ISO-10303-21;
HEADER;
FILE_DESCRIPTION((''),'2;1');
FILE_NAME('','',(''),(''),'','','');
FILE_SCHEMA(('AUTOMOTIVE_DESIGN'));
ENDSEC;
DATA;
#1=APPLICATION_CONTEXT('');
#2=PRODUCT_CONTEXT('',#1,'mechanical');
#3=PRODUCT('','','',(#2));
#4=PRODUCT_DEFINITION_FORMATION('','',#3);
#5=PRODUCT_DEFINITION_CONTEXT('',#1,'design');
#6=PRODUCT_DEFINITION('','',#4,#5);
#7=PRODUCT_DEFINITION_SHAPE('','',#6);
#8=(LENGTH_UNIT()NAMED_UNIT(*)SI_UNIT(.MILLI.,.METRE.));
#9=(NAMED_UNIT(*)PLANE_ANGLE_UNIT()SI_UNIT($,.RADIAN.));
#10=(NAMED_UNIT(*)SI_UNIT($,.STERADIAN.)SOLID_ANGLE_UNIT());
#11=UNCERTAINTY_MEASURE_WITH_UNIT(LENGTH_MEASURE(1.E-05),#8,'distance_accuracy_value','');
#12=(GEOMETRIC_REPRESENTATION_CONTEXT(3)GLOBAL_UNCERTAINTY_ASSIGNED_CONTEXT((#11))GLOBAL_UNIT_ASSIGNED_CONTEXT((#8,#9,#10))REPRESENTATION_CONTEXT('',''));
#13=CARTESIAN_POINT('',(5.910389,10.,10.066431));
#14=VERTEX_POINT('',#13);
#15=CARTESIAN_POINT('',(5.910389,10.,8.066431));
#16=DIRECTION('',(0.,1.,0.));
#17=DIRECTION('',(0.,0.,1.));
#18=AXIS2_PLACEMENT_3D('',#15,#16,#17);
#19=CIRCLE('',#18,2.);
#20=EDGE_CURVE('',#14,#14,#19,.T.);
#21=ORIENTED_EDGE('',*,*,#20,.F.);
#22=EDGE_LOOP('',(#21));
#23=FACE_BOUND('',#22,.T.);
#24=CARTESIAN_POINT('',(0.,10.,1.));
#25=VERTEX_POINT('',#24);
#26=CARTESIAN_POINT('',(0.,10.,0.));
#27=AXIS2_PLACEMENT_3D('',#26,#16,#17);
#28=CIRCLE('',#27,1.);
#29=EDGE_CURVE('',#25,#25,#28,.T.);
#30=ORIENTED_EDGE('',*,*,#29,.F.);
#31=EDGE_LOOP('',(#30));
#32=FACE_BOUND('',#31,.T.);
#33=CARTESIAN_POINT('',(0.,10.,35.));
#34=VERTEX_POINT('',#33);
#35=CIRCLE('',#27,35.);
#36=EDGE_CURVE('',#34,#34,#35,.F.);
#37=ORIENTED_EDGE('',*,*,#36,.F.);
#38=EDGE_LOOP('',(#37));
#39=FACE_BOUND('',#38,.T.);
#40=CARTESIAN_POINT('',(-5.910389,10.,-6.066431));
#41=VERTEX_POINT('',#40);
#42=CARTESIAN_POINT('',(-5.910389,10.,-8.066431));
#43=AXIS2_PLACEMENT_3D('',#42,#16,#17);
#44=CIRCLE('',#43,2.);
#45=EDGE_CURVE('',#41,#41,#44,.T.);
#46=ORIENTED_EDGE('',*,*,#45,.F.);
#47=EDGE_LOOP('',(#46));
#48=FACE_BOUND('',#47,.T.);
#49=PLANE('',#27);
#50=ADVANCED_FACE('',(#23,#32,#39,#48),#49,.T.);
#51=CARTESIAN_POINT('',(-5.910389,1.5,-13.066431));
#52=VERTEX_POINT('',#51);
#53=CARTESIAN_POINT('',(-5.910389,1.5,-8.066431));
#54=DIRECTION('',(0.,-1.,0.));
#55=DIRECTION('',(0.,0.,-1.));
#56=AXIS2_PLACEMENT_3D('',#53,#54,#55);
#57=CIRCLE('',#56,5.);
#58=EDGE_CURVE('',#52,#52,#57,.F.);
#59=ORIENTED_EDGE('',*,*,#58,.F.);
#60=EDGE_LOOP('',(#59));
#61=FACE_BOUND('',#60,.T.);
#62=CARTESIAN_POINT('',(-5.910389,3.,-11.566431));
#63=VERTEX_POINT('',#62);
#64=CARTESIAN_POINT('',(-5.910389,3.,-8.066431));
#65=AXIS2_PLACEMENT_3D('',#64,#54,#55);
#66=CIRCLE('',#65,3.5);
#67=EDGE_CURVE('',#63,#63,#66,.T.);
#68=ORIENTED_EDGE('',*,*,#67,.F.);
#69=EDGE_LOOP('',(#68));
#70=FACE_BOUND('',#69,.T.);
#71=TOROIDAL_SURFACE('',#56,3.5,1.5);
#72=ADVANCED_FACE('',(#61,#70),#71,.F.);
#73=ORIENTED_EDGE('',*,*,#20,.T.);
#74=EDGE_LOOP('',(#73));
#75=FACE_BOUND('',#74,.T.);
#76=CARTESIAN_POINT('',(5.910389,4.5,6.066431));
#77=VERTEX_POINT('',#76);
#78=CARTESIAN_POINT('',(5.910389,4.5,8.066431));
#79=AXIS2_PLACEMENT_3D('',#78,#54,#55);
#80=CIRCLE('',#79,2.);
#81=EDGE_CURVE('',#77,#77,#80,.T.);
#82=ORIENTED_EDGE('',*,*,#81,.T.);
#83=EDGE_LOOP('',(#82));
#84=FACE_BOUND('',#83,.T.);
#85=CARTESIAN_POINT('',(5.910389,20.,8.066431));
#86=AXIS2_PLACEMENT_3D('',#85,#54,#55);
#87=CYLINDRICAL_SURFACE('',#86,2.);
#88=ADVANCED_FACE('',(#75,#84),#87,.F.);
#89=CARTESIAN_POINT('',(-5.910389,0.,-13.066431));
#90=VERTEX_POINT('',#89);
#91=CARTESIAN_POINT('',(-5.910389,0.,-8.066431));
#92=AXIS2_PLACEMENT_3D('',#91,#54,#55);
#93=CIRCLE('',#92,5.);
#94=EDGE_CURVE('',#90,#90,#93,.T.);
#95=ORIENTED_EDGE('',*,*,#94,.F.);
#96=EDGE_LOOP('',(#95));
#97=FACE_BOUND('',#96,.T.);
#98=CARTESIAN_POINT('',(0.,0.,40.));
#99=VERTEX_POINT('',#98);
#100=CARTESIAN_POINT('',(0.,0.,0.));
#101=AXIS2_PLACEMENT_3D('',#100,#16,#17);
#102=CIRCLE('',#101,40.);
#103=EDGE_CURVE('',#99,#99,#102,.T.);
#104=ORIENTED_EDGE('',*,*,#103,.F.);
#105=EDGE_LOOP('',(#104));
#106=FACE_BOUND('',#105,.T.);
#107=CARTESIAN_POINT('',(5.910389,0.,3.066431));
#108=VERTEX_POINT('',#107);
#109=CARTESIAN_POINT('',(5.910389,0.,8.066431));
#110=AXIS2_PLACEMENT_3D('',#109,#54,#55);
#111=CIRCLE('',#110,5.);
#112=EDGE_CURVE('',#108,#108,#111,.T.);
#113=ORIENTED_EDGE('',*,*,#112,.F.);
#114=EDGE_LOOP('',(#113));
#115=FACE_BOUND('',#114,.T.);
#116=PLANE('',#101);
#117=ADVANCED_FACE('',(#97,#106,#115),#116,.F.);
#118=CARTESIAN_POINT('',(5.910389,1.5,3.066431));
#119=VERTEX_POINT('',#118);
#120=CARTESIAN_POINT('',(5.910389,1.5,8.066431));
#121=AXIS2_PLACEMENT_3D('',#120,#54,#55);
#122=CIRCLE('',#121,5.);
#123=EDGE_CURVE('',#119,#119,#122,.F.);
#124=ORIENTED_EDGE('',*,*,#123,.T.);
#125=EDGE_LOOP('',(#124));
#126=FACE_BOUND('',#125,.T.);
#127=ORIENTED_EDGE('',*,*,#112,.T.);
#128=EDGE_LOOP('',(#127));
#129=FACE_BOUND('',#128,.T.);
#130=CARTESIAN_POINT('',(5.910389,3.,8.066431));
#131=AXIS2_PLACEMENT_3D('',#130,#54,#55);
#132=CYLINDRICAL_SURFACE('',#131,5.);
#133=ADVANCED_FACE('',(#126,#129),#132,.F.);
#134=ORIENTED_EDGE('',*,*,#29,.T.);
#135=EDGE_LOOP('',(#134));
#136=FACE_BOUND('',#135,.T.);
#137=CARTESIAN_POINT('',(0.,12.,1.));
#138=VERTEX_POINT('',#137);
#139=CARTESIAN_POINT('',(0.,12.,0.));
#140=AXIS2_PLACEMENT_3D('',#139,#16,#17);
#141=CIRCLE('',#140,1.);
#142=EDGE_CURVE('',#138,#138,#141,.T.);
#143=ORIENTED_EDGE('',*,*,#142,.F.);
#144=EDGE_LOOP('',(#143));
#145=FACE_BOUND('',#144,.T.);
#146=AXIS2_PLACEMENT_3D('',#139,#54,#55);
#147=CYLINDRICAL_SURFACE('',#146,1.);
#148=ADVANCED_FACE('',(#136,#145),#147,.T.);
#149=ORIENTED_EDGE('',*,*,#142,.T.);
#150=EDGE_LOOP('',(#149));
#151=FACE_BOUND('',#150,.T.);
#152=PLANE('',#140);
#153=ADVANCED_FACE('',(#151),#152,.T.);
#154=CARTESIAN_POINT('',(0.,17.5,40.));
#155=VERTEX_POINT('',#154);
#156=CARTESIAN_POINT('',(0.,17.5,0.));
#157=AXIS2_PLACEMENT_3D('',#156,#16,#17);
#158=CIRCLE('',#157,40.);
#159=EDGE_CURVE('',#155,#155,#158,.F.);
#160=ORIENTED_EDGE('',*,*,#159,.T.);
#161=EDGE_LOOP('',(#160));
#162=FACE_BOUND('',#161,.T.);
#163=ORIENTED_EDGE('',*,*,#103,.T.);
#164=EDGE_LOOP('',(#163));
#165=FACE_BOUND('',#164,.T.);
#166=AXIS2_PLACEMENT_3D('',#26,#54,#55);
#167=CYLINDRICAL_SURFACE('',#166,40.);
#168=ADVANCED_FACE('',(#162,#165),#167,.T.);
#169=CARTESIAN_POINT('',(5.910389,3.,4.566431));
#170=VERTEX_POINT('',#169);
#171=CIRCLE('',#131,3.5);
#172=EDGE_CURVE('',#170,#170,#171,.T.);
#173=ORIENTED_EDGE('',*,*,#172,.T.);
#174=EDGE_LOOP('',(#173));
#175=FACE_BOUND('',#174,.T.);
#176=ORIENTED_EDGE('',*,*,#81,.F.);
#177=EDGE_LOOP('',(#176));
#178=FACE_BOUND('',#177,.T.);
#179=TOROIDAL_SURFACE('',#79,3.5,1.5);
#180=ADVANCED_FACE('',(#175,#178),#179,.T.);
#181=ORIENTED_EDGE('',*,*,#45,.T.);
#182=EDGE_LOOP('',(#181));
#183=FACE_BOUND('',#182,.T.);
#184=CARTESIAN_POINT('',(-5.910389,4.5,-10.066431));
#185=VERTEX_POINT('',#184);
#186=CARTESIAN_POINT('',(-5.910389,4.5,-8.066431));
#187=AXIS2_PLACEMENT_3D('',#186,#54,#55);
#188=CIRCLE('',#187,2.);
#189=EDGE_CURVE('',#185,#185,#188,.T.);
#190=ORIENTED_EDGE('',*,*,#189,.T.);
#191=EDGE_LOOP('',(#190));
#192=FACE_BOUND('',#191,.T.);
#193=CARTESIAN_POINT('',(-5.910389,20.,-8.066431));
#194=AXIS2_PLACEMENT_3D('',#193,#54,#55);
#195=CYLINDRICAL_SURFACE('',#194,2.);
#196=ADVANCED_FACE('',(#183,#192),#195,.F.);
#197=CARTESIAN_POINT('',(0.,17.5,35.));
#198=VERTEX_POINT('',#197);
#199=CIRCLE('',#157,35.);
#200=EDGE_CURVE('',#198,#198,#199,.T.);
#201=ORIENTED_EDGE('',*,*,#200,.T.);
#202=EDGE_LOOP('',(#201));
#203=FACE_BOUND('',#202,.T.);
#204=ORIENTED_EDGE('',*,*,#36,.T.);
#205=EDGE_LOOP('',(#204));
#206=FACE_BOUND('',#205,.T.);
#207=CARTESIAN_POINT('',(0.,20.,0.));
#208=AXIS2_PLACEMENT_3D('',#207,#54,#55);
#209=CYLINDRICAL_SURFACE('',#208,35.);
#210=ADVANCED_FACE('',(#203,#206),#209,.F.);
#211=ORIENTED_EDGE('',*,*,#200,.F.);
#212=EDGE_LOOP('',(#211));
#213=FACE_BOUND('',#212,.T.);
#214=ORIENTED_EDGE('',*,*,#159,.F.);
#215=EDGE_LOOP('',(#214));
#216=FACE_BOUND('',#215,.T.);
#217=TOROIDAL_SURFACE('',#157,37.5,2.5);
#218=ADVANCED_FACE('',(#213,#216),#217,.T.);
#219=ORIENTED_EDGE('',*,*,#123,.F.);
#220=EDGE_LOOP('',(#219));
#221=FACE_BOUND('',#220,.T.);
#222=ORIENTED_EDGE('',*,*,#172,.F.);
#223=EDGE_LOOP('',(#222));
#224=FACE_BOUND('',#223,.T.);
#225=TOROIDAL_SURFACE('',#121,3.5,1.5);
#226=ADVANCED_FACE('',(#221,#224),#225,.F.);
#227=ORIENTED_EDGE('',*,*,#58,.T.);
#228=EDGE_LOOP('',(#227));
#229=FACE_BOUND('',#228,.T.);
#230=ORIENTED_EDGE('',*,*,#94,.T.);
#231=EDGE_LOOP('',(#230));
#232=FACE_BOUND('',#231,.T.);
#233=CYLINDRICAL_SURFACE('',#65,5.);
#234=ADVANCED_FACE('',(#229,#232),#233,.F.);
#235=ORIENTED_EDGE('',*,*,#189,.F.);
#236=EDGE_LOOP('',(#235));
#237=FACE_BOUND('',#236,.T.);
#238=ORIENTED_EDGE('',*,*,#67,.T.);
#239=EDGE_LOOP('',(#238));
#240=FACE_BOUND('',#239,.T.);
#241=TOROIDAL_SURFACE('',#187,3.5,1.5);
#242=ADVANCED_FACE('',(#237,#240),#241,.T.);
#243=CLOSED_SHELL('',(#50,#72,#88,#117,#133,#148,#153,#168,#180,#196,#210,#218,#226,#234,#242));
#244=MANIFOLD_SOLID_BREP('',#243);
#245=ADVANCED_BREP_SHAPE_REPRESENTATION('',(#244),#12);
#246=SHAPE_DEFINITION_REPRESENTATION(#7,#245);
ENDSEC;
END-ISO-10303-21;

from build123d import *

# Parameters (mm, degrees)
SKETCH_1_R          = 40
EXTRUDE_1_DEPTH     = 10
SKETCH_2_R          = 40
SKETCH_2_R_2        = 35
EXTRUDE_2_DEPTH     = 10
SKETCH_3_R          = 2
CUT_EXTRUDE_1_DEPTH = 20
SKETCH_4_R          = 5
CUT_EXTRUDE_2_DEPTH = 3
FILLET_1_R          = 1.5
FILLET_2_R          = 1.5
FILLET_3_R          = 2.5
SKETCH_5_R          = 1
EXTRUDE_3_DEPTH     = 2


with BuildPart() as part:
    # 草圖1 → 填料-伸長1 (new body)
    with BuildSketch(Plane(origin=(0, 0, 0), x_dir=(1, 0, 0), z_dir=(0, 1, 0))):
        with Locations(Location((0, 0, 0), (0, 0, 270))):
            Circle(SKETCH_1_R)
    extrude(amount=EXTRUDE_1_DEPTH)

    # 草圖2 → 填料-伸長2 (add)
    with BuildSketch(Plane(origin=(0, 10, 0), x_dir=(1, 0, 0), z_dir=(0, 1, 0))):
        with Locations(Location((0, 0, 0), (0, 0, 270))):
            Circle(SKETCH_2_R)
        with Locations(Location((0, 0, 0), (0, 0, 270))):
            Circle(SKETCH_2_R_2, mode=Mode.SUBTRACT)
    extrude(amount=EXTRUDE_2_DEPTH)

    # 草圖3 → 除料-伸長1 (cut)
    with BuildSketch(Plane.XZ):
        with Locations(Location((5.910388913, 8.066430617, 0), (0, 0, 270))):
            Circle(SKETCH_3_R)
        with Locations(Location((-5.910388913, -8.066430617, 0), (0, 0, 270))):
            Circle(SKETCH_3_R)
    extrude(amount=-CUT_EXTRUDE_1_DEPTH, mode=Mode.SUBTRACT)

    # 草圖4 → 除料-伸長2 (cut)
    with BuildSketch(Plane.XZ):
        with Locations(Location((5.910388913, 8.066430617, 0), (0, 0, 270))):
            Circle(SKETCH_4_R)
        with Locations(Location((-5.910388913, -8.066430617, 0), (0, 0, 270))):
            Circle(SKETCH_4_R)
    extrude(amount=-CUT_EXTRUDE_2_DEPTH, mode=Mode.SUBTRACT)

    # 圓角1
    fillet_1_edges = [part.edges().sort_by_distance(p)[0] for p in [
        (-5.910388913, 3, -3.066430617),
        (-5.910388913, 3, -6.066430617),
    ]]
    fillet(fillet_1_edges, radius=FILLET_1_R - 0.0001)  # a hair under: the kernel refuses the full size

    # 圓角2
    fillet_2_edges = [part.edges().sort_by_distance(p)[0] for p in [
        (5.910388913, 3, 13.066430617),
        (5.910388913, 3, 10.066430617),
    ]]
    fillet(fillet_2_edges, radius=FILLET_2_R - 0.0001)  # a hair under: the kernel refuses the full size

    # 圓角3
    fillet_3_edges = [part.edges().sort_by_distance(p)[0] for p in [
        (0, 20, -40),
        (0, 20, -35),
    ]]
    fillet(fillet_3_edges, radius=FILLET_3_R - 0.0001)  # a hair under: the kernel refuses the full size

    # 草圖5 → 填料-伸長3 (add)
    with BuildSketch(Plane(origin=(0, 10, 0), x_dir=(1, 0, 0), z_dir=(0, 1, 0))):
        with Locations(Location((0, 0, 0), (0, 0, 270))):
            Circle(SKETCH_5_R)
    extrude(amount=EXTRUDE_3_DEPTH)


solid = part.part
